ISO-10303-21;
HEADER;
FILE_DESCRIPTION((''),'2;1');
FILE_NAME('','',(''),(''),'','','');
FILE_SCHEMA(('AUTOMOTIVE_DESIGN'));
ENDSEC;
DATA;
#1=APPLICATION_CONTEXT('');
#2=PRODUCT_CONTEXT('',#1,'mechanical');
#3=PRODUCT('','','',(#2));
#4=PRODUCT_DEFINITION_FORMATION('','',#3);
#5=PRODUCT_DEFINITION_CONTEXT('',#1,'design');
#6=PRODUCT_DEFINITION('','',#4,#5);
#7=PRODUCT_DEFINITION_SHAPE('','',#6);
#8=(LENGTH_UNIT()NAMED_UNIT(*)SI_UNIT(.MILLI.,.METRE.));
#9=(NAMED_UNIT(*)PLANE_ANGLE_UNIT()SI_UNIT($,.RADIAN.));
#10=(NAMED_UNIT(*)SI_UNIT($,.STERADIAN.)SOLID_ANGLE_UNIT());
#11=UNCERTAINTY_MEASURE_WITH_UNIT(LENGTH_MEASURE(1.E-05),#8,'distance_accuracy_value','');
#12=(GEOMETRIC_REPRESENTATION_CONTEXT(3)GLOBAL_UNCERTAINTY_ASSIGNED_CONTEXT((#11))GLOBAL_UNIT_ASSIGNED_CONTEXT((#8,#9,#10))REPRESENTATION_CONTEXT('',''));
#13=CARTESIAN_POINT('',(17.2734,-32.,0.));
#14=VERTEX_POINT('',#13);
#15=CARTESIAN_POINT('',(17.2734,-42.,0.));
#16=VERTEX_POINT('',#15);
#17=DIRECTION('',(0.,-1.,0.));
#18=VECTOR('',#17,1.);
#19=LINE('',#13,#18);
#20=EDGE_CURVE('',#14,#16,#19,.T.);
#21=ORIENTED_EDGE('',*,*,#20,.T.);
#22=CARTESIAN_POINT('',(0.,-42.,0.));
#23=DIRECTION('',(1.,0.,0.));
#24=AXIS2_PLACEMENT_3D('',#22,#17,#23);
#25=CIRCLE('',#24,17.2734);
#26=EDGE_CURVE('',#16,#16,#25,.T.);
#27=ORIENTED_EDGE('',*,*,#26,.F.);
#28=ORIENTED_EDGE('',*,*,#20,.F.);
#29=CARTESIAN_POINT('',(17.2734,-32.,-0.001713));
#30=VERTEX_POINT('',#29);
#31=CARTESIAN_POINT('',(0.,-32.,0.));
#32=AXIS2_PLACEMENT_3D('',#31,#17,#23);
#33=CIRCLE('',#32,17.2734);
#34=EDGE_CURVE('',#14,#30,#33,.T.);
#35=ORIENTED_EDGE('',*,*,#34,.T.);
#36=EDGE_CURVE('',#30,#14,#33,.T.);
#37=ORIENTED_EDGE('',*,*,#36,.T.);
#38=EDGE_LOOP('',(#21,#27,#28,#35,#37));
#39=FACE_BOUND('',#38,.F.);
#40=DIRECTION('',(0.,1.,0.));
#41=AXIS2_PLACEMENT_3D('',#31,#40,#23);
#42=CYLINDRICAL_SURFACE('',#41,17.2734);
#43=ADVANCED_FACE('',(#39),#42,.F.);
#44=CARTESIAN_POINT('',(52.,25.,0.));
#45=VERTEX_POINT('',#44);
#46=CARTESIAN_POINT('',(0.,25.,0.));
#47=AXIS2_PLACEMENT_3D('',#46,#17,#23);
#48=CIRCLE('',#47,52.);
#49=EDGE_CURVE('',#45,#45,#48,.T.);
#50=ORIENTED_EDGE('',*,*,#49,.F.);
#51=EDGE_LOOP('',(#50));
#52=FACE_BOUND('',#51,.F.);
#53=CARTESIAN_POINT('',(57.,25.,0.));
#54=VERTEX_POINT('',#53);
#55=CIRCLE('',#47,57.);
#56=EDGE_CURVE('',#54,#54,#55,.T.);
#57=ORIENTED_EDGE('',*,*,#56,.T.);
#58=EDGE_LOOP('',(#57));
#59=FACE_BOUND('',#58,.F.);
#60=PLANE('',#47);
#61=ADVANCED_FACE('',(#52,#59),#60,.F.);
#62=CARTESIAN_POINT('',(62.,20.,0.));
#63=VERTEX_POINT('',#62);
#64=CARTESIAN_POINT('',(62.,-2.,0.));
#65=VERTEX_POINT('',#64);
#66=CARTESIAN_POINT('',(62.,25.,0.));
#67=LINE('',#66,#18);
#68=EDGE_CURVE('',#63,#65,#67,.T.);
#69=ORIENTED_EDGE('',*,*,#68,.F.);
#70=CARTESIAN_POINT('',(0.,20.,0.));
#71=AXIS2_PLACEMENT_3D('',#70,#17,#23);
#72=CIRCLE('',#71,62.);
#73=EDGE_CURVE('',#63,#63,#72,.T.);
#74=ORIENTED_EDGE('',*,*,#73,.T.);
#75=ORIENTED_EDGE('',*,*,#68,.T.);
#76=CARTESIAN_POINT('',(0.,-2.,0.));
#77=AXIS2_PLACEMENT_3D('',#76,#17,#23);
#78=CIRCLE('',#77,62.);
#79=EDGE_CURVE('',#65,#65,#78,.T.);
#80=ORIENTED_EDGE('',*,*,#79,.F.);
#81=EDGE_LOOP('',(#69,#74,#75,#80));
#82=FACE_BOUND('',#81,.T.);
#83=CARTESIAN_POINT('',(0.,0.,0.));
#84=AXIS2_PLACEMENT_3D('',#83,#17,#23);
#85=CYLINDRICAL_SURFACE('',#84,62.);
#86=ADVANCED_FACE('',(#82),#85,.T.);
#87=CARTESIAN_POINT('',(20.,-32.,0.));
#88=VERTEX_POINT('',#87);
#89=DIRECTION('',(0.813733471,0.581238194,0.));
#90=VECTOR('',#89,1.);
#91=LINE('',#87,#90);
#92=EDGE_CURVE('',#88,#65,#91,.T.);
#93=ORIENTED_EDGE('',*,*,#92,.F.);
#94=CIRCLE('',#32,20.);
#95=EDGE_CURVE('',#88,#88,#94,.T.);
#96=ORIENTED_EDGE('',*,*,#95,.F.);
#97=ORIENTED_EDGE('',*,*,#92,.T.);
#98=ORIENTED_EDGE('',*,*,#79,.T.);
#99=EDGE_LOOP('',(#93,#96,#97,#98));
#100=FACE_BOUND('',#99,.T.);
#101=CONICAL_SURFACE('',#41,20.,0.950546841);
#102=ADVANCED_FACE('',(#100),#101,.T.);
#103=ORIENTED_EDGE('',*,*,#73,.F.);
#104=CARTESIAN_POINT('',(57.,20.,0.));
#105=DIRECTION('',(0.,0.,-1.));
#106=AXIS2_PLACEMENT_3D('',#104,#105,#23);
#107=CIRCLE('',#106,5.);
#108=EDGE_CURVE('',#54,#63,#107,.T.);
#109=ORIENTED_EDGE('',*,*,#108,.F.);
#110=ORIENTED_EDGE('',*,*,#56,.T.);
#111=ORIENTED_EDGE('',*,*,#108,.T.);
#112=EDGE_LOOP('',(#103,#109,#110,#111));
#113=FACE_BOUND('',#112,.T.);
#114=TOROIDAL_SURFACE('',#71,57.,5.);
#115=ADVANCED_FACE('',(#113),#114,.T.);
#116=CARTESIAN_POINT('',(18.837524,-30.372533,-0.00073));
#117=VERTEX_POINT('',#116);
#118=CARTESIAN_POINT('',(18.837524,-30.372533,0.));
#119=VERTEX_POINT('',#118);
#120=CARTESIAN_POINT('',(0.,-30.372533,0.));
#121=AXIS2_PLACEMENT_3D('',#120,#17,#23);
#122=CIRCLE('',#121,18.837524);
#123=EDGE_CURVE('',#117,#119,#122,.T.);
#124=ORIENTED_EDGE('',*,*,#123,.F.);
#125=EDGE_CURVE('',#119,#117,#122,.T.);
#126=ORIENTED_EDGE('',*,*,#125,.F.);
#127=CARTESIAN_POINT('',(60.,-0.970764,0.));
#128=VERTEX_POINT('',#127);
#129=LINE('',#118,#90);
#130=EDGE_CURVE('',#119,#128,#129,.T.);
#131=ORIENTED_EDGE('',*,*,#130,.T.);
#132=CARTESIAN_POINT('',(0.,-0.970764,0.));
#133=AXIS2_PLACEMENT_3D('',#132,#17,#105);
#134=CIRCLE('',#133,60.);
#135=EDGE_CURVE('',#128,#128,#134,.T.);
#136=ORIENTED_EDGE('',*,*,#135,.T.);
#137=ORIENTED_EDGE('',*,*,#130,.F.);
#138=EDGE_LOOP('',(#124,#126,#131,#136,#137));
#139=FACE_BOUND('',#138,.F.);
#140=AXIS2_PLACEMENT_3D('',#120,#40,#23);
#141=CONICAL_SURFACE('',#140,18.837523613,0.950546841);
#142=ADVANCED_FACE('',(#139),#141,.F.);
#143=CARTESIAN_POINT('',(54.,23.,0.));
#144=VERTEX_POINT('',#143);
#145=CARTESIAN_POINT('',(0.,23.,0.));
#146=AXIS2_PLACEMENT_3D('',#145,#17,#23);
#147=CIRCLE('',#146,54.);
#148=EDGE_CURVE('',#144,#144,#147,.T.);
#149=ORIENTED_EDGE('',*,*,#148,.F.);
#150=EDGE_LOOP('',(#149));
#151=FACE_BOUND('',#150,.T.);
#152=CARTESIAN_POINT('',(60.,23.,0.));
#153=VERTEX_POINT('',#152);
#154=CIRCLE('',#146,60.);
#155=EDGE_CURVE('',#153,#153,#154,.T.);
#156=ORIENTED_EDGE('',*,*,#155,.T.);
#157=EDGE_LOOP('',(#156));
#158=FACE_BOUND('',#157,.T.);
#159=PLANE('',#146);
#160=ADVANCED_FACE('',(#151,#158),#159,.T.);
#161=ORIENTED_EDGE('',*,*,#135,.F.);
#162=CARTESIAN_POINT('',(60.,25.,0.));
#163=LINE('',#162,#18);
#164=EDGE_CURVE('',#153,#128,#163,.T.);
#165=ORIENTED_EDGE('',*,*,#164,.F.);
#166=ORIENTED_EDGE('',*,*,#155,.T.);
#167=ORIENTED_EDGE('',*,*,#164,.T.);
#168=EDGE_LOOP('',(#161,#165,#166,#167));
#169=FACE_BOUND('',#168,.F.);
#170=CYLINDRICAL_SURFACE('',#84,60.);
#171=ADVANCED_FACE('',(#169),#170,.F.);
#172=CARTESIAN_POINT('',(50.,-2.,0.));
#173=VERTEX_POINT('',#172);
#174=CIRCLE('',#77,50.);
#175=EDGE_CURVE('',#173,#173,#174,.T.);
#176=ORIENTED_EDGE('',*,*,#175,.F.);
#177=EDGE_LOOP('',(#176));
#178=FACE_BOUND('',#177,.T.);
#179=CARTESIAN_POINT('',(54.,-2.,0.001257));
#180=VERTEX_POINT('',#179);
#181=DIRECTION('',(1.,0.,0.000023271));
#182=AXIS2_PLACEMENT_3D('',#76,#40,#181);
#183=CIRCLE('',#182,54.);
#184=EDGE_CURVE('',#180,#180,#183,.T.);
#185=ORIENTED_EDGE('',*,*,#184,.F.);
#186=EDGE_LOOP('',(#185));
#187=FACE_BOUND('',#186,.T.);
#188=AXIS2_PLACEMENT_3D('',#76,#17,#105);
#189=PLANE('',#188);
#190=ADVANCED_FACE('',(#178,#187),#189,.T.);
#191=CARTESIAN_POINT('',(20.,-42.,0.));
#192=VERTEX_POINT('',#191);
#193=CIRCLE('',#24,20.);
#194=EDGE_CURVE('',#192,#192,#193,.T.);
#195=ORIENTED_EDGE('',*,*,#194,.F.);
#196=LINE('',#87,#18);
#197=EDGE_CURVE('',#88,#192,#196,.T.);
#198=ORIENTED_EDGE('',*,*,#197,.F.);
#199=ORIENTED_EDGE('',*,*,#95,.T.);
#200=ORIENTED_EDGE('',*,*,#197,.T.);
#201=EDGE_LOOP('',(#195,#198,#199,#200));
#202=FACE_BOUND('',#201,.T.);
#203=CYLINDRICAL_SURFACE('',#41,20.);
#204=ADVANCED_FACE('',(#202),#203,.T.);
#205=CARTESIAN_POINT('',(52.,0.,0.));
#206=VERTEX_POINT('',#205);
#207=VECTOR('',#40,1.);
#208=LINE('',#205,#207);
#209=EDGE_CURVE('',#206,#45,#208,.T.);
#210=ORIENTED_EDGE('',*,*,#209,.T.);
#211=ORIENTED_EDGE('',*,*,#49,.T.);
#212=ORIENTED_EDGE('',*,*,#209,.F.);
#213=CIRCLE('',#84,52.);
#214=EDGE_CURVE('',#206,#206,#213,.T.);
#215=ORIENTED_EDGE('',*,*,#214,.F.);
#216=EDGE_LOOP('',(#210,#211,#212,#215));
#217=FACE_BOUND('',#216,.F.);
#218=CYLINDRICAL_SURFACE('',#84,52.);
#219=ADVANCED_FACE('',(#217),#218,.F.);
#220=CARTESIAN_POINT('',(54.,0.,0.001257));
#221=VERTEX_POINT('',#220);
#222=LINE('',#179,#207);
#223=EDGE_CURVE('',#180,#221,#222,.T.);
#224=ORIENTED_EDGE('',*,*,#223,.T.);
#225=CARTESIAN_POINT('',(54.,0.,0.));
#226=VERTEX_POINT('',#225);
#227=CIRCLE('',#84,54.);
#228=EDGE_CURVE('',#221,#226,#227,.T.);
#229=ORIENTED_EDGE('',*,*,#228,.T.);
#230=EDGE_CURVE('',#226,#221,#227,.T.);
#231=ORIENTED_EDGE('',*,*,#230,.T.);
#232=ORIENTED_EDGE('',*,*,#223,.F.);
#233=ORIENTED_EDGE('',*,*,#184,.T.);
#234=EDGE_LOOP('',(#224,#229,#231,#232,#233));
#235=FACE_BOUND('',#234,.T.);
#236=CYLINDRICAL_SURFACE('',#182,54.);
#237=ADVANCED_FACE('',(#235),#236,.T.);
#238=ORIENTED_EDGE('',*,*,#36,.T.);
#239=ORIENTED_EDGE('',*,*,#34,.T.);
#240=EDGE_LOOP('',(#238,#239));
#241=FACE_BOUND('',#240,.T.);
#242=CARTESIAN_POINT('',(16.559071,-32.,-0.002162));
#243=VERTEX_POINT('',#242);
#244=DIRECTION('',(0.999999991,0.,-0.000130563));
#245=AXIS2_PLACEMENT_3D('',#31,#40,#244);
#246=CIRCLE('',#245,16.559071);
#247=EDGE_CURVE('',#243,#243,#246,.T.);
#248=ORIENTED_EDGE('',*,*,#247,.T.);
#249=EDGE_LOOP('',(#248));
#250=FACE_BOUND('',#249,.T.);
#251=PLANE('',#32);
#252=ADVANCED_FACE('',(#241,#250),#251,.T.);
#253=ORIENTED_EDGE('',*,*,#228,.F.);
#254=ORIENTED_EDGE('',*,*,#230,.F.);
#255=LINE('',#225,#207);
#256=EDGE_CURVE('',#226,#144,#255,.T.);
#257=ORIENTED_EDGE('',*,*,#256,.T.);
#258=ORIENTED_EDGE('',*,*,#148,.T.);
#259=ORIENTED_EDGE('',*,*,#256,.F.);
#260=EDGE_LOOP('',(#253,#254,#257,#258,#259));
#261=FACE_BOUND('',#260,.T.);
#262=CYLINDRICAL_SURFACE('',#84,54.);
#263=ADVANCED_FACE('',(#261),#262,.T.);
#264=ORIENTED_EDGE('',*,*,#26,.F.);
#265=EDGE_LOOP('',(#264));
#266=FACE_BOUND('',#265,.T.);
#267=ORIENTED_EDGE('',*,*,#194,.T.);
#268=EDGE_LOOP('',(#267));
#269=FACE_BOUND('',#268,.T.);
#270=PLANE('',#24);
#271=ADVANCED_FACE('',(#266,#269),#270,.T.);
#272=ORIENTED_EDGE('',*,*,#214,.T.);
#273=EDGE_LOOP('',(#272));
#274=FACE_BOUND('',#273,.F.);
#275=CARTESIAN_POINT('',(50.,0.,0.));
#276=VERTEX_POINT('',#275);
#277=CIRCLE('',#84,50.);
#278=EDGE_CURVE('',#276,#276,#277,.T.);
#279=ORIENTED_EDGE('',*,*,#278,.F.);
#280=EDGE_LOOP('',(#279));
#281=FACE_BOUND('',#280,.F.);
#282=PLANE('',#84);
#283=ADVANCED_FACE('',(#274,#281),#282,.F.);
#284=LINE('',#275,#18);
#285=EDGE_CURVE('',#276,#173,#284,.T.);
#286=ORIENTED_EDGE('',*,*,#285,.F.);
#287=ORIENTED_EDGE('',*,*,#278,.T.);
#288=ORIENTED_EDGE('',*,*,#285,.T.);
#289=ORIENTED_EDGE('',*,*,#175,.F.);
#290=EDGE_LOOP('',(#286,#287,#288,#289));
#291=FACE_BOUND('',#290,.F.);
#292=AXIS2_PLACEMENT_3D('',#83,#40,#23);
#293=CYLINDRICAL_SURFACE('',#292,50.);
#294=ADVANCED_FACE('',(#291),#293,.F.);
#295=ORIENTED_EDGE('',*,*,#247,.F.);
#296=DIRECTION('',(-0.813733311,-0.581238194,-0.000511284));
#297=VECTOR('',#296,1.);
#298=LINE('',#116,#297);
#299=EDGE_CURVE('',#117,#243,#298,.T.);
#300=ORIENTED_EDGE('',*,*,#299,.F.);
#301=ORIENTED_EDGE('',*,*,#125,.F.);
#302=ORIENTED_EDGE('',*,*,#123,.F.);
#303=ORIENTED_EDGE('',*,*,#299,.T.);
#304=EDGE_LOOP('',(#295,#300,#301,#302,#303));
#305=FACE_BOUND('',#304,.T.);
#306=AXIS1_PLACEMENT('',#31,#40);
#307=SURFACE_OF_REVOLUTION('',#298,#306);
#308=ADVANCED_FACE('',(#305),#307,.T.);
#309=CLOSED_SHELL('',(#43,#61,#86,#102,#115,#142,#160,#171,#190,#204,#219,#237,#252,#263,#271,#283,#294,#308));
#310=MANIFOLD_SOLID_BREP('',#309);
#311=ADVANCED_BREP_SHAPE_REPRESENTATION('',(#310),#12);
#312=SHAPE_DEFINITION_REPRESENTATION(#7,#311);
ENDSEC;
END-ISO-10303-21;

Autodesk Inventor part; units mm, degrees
ref_plane "YZ Plane" through (0, 0, 0) normal (1, 0, 0) x (0, 1, 0)
ref_plane "XZ Plane" through (0, 0, 0) normal (0, 1, 0) x (-1, 0, 0)
ref_plane "Work Plane1" through (0, 0, 0) normal (0, -1, 0) x (1, 0, 0)
sketch "Sketch1" plane through (0, 0, 0) normal (0, -1, 0) x (1, 0, 0)
  circle A0 centre (0, 0) radius 52 projected
  circle A1 centre (0, 0) radius 62
  circle A2 centre (0, 0) radius 52
  dimension "d1" = 10
extrude "Extrusion1" add sketch "Sketch1" against normal blind 25
sketch "Sketch3" plane through (0, 0, 0) normal (0, -1, 0) x (1, 0, 0)
  circle A0 centre (0, 0) radius 62
  circle A1 centre (0, 0) radius 50
  circle A2 centre (0, 0) radius 52 projected
  dimension "d9" = 124
  dimension "d10" = 2
extrude "Extrusion3" add sketch "Sketch3" along normal blind 2 contours A0 | A2
sketch "Sketch4" plane through (0, -2, 0) normal (0, -1, 0) x (1, 0, 0)
  circle A0 centre (0, 0) radius 62 construction
  line L0 (-62, 0) -> (62, 0) construction
  line L1 (0, 62) -> (0, -62) construction
ref_plane "Work Plane2" through (-62, -2, 0) normal (0, 0, 1) x (1, 0, 0)
sketch "Sketch5" plane through (-62, -2, 0) normal (0, 0, 1) x (1, 0, 0)
  line L0 (0, 0) -> (124, 0) construction
  line L1 (62, 0) -> (62, -30) construction
  line L2 (62, 0) -> (62, -30) construction
  line L3 (82, -30) -> (124, 0) construction
  line L4 (62, 0) -> (62, -30) construction
  line L5 (62, 0) -> (62, -30)
  line L6 (82, -30) -> (124, 0)
  line L7 (62, 0) -> (124, 0)
  line L8 (82, -30) -> (62, -30)
  point P0 (62, 2)
  dimension "d14" = 20
  dimension "d23" = 30
revolve "Revolution1" add sketch "Sketch5" angle 360 about axis through (0, -2, 0) along (0, -1, 0)
shell "Shell1" thickness 2 removed faces 2 at (9.39, -2, -8.8667) at (-4.4202, -32, 2.9181)
fillet "Fillet2" radius 5 1 edges at (-62, 25, 0)
sketch "Sketch6" plane through (0, -32, 0) normal (0, -1, 0) x (1, 0, 0)
  circle A0 centre (0, 0) radius 20
  circle A1 centre (0, 0) radius 17.2734
  point P0 (0, 0)
extrude "Extrusion4" add sketch "Sketch6" along normal blind 10
sketch "Sketch7" plane through (-62, -2, 0) normal (0, 0, 1) x (1, 0, 0)
  line L0 (116, 0) -> (8, 0) construction
  line L1 (62, 0) -> (62, -68.8676) construction
  line L2 (62, -68.8676) -> (62, 58.2557) construction
  point P0 (62, 2)
sketch "Sketch8" plane through (0, -42, 0) normal (0, -1, 0) x (1, 0, 0)
  circle A0 centre (0, 0) radius 17.2734 construction
  circle A1 centre (0, 0) radius 20 construction
  point P0 (0, 0)
  dimension "d21" = 34.5467
  dimension "d22" = 40
properties part number "JarCone"
